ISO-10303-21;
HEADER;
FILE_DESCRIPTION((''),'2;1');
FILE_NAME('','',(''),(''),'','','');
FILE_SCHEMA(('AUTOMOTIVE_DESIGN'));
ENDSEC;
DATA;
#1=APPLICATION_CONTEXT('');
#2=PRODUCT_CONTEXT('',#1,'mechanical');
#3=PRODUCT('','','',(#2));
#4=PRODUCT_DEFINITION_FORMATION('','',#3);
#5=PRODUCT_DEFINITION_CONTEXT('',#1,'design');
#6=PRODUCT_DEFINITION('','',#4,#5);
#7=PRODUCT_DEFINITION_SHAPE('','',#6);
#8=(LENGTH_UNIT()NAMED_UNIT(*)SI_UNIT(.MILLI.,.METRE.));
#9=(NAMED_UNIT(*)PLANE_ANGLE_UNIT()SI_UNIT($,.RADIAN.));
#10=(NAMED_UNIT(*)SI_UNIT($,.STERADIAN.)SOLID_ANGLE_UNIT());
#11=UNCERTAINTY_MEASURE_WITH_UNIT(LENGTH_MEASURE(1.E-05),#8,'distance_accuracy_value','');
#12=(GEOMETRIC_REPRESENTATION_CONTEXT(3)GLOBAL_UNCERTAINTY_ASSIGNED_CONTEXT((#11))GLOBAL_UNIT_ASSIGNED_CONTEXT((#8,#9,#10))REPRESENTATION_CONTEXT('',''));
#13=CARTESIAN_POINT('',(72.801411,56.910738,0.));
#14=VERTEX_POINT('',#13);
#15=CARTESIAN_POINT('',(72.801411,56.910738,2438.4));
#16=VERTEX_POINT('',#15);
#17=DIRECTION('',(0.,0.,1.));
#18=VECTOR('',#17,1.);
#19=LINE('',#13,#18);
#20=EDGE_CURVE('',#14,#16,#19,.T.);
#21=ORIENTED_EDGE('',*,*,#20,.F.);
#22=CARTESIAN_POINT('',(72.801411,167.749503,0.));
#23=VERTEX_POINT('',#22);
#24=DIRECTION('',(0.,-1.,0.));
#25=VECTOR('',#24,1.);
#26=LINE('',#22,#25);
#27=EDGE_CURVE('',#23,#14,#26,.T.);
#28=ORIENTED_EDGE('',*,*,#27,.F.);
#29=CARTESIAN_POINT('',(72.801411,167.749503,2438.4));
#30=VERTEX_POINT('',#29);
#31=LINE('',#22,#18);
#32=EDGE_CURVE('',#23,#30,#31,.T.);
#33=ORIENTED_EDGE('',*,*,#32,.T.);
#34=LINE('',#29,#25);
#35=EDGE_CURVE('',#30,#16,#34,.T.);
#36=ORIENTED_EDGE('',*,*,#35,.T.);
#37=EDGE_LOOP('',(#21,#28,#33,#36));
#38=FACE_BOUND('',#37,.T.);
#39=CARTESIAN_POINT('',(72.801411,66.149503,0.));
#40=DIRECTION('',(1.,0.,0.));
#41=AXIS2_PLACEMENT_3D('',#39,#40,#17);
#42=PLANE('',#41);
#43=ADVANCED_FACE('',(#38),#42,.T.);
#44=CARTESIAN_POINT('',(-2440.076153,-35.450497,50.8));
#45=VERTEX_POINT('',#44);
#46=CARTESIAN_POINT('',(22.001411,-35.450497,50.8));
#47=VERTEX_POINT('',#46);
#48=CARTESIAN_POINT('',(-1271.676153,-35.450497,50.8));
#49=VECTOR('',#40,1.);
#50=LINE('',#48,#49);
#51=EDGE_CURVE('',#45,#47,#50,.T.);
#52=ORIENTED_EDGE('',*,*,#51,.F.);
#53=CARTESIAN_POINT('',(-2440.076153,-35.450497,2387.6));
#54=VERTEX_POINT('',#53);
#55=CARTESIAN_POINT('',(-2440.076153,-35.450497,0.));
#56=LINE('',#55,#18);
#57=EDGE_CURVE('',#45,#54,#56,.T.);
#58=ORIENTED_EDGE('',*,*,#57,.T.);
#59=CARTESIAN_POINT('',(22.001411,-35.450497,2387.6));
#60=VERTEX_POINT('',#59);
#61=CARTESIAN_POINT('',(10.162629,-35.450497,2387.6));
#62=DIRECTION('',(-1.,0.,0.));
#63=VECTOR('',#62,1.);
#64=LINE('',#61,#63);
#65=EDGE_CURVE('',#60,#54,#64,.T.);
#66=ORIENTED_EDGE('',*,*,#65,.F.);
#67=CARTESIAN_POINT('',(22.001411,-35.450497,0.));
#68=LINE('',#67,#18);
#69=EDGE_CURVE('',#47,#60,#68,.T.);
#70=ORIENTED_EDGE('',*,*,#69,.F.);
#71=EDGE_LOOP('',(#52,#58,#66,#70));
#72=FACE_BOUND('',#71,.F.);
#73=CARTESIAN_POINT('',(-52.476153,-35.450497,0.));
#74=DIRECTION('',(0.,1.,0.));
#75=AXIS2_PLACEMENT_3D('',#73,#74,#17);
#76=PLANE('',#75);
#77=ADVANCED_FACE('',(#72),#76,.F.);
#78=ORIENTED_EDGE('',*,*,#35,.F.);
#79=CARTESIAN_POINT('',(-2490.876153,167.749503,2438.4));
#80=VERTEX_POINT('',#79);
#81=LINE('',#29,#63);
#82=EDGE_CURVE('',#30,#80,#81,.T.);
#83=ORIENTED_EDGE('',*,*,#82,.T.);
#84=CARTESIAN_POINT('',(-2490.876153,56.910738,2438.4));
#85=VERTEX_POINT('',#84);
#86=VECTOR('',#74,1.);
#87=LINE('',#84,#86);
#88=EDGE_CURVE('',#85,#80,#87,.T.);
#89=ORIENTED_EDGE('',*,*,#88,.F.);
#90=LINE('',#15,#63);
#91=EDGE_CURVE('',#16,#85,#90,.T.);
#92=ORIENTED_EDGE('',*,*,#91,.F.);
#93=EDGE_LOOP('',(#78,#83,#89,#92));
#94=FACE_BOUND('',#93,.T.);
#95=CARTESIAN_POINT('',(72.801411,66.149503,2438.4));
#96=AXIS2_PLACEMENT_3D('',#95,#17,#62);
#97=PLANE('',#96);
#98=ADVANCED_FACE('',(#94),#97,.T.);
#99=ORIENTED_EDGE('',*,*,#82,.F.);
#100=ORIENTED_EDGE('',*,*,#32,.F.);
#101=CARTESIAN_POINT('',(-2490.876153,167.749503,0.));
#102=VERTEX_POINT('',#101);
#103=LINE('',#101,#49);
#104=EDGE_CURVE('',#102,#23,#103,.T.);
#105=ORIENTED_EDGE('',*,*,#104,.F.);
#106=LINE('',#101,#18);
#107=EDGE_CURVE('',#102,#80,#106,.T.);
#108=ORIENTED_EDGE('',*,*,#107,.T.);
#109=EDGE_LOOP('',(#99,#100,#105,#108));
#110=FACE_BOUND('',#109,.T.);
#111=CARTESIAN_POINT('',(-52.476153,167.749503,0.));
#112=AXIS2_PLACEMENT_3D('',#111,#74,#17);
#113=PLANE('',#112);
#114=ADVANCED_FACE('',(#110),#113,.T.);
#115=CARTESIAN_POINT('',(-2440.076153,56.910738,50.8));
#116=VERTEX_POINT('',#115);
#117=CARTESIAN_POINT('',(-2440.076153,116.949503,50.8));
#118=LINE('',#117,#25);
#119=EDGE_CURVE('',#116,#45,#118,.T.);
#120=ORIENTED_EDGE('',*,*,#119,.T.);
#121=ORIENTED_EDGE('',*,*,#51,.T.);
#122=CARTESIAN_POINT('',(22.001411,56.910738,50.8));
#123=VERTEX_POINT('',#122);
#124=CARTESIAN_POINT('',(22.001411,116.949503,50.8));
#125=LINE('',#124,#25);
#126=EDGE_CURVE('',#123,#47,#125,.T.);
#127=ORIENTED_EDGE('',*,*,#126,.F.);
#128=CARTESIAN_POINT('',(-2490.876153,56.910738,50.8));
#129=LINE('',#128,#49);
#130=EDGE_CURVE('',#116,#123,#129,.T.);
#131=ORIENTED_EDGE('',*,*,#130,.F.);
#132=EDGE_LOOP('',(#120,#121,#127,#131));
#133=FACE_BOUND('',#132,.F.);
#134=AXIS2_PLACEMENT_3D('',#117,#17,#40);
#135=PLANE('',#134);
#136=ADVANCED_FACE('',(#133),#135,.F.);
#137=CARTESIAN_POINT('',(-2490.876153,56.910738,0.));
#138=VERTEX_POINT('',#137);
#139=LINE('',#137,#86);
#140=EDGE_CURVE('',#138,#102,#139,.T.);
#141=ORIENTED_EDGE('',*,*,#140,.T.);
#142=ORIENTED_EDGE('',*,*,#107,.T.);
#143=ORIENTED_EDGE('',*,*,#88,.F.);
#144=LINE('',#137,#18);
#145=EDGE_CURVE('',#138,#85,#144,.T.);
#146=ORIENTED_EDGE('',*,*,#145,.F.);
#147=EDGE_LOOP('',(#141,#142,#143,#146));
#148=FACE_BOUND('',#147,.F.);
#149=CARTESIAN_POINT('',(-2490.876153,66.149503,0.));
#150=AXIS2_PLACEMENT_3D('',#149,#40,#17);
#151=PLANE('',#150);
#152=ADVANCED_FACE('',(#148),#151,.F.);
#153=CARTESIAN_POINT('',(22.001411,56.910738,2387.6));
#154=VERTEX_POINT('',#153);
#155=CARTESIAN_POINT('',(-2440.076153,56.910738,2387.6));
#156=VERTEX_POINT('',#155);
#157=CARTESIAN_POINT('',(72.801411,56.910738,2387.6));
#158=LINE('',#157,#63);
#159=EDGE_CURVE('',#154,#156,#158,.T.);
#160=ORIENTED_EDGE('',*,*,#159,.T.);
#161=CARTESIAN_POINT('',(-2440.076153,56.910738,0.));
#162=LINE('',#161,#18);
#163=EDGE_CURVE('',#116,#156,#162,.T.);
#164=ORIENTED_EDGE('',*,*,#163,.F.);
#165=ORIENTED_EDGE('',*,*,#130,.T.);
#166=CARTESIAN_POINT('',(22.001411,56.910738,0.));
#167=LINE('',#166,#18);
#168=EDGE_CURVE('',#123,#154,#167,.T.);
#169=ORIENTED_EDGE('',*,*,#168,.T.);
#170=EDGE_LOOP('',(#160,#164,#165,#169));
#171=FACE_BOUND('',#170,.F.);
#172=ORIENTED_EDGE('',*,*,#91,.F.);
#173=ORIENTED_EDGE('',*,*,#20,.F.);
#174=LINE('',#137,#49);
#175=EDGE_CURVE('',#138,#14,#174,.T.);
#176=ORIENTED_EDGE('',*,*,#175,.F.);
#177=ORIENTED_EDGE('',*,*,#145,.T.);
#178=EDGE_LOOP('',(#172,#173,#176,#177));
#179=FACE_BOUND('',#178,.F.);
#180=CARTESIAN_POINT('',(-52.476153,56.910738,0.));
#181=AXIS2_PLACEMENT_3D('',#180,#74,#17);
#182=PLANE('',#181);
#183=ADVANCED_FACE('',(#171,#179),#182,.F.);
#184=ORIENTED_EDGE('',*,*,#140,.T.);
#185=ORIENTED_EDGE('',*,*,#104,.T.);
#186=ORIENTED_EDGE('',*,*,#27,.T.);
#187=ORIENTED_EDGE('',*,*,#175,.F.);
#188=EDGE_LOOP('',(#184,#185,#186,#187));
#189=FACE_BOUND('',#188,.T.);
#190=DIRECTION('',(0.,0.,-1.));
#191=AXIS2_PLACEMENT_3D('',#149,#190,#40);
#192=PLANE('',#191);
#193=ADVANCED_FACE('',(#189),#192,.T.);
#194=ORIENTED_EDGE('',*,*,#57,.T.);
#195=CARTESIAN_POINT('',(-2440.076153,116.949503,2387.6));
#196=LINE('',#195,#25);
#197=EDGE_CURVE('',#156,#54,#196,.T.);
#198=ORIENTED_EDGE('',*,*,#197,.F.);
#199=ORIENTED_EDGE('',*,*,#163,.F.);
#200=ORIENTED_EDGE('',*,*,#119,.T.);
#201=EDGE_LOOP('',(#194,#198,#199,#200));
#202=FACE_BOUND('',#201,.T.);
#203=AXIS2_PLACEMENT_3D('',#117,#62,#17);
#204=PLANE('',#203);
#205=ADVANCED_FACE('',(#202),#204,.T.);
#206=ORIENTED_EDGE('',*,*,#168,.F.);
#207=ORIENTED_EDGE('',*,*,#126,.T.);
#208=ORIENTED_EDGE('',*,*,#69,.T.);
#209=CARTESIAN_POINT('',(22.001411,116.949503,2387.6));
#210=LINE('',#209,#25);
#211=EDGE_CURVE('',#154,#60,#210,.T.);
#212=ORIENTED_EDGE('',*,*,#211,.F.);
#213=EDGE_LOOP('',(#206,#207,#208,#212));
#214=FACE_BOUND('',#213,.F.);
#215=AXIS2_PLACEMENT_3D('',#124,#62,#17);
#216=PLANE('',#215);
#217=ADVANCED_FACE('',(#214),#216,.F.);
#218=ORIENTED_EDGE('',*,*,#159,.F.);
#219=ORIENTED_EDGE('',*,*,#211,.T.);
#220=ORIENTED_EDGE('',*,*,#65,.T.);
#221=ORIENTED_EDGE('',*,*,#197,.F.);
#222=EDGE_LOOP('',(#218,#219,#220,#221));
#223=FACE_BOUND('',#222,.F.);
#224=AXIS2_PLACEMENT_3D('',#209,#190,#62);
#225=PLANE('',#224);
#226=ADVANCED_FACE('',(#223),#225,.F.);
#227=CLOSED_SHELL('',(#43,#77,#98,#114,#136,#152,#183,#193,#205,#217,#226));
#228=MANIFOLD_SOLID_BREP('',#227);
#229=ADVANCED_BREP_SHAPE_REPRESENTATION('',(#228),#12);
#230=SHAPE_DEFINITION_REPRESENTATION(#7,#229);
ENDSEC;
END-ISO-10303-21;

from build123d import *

# Parameters (mm, degrees)
F0_W     = 125.2775639296
F0_H     = 9.2387646437
F1_DEPTH = 2438.4
F2_DEPTH = 2438.4
F3_DEPTH = 101.6
F4_T     = -50.8
F5_DEPTH = 152.4


with BuildPart() as f1:
    # F0 (on Top) → F1 (new body)
    with BuildSketch(Plane.XY):
        with Locations((10.1626291871, 61.5301206708)):
            Rectangle(F0_W, F0_H)
    extrude(amount=F1_DEPTH)

    # F2 (add): a face of the model
    f2_faces = [f1.faces().sort_by_distance(p)[0] for p in [
        (-52.4761527777, 61.5301206708, 1219.2),
    ]]
    extrude(f2_faces, amount=F2_DEPTH)

    # F3 (add): a face of the model
    f3_faces = [f1.faces().sort_by_distance(p)[0] for p in [
        (-1209.0373708129, 66.1495029926, 1219.2),
    ]]
    extrude(f3_faces, amount=F3_DEPTH)

    # F4
    f4_openings = [f1.faces().sort_by_distance(p)[0] for p in [
        (-1209.037371, 56.910738, 1219.2),
    ]]
    offset(amount=F4_T, openings=f4_openings)

    # F5 (add): a face of the model
    f5_faces = [f1.faces().sort_by_distance(p)[0] for p in [
        (-1209.0373708129, 116.9495029926, 1219.2),
    ]]
    extrude(f5_faces, amount=F5_DEPTH)


solid = f1.part
